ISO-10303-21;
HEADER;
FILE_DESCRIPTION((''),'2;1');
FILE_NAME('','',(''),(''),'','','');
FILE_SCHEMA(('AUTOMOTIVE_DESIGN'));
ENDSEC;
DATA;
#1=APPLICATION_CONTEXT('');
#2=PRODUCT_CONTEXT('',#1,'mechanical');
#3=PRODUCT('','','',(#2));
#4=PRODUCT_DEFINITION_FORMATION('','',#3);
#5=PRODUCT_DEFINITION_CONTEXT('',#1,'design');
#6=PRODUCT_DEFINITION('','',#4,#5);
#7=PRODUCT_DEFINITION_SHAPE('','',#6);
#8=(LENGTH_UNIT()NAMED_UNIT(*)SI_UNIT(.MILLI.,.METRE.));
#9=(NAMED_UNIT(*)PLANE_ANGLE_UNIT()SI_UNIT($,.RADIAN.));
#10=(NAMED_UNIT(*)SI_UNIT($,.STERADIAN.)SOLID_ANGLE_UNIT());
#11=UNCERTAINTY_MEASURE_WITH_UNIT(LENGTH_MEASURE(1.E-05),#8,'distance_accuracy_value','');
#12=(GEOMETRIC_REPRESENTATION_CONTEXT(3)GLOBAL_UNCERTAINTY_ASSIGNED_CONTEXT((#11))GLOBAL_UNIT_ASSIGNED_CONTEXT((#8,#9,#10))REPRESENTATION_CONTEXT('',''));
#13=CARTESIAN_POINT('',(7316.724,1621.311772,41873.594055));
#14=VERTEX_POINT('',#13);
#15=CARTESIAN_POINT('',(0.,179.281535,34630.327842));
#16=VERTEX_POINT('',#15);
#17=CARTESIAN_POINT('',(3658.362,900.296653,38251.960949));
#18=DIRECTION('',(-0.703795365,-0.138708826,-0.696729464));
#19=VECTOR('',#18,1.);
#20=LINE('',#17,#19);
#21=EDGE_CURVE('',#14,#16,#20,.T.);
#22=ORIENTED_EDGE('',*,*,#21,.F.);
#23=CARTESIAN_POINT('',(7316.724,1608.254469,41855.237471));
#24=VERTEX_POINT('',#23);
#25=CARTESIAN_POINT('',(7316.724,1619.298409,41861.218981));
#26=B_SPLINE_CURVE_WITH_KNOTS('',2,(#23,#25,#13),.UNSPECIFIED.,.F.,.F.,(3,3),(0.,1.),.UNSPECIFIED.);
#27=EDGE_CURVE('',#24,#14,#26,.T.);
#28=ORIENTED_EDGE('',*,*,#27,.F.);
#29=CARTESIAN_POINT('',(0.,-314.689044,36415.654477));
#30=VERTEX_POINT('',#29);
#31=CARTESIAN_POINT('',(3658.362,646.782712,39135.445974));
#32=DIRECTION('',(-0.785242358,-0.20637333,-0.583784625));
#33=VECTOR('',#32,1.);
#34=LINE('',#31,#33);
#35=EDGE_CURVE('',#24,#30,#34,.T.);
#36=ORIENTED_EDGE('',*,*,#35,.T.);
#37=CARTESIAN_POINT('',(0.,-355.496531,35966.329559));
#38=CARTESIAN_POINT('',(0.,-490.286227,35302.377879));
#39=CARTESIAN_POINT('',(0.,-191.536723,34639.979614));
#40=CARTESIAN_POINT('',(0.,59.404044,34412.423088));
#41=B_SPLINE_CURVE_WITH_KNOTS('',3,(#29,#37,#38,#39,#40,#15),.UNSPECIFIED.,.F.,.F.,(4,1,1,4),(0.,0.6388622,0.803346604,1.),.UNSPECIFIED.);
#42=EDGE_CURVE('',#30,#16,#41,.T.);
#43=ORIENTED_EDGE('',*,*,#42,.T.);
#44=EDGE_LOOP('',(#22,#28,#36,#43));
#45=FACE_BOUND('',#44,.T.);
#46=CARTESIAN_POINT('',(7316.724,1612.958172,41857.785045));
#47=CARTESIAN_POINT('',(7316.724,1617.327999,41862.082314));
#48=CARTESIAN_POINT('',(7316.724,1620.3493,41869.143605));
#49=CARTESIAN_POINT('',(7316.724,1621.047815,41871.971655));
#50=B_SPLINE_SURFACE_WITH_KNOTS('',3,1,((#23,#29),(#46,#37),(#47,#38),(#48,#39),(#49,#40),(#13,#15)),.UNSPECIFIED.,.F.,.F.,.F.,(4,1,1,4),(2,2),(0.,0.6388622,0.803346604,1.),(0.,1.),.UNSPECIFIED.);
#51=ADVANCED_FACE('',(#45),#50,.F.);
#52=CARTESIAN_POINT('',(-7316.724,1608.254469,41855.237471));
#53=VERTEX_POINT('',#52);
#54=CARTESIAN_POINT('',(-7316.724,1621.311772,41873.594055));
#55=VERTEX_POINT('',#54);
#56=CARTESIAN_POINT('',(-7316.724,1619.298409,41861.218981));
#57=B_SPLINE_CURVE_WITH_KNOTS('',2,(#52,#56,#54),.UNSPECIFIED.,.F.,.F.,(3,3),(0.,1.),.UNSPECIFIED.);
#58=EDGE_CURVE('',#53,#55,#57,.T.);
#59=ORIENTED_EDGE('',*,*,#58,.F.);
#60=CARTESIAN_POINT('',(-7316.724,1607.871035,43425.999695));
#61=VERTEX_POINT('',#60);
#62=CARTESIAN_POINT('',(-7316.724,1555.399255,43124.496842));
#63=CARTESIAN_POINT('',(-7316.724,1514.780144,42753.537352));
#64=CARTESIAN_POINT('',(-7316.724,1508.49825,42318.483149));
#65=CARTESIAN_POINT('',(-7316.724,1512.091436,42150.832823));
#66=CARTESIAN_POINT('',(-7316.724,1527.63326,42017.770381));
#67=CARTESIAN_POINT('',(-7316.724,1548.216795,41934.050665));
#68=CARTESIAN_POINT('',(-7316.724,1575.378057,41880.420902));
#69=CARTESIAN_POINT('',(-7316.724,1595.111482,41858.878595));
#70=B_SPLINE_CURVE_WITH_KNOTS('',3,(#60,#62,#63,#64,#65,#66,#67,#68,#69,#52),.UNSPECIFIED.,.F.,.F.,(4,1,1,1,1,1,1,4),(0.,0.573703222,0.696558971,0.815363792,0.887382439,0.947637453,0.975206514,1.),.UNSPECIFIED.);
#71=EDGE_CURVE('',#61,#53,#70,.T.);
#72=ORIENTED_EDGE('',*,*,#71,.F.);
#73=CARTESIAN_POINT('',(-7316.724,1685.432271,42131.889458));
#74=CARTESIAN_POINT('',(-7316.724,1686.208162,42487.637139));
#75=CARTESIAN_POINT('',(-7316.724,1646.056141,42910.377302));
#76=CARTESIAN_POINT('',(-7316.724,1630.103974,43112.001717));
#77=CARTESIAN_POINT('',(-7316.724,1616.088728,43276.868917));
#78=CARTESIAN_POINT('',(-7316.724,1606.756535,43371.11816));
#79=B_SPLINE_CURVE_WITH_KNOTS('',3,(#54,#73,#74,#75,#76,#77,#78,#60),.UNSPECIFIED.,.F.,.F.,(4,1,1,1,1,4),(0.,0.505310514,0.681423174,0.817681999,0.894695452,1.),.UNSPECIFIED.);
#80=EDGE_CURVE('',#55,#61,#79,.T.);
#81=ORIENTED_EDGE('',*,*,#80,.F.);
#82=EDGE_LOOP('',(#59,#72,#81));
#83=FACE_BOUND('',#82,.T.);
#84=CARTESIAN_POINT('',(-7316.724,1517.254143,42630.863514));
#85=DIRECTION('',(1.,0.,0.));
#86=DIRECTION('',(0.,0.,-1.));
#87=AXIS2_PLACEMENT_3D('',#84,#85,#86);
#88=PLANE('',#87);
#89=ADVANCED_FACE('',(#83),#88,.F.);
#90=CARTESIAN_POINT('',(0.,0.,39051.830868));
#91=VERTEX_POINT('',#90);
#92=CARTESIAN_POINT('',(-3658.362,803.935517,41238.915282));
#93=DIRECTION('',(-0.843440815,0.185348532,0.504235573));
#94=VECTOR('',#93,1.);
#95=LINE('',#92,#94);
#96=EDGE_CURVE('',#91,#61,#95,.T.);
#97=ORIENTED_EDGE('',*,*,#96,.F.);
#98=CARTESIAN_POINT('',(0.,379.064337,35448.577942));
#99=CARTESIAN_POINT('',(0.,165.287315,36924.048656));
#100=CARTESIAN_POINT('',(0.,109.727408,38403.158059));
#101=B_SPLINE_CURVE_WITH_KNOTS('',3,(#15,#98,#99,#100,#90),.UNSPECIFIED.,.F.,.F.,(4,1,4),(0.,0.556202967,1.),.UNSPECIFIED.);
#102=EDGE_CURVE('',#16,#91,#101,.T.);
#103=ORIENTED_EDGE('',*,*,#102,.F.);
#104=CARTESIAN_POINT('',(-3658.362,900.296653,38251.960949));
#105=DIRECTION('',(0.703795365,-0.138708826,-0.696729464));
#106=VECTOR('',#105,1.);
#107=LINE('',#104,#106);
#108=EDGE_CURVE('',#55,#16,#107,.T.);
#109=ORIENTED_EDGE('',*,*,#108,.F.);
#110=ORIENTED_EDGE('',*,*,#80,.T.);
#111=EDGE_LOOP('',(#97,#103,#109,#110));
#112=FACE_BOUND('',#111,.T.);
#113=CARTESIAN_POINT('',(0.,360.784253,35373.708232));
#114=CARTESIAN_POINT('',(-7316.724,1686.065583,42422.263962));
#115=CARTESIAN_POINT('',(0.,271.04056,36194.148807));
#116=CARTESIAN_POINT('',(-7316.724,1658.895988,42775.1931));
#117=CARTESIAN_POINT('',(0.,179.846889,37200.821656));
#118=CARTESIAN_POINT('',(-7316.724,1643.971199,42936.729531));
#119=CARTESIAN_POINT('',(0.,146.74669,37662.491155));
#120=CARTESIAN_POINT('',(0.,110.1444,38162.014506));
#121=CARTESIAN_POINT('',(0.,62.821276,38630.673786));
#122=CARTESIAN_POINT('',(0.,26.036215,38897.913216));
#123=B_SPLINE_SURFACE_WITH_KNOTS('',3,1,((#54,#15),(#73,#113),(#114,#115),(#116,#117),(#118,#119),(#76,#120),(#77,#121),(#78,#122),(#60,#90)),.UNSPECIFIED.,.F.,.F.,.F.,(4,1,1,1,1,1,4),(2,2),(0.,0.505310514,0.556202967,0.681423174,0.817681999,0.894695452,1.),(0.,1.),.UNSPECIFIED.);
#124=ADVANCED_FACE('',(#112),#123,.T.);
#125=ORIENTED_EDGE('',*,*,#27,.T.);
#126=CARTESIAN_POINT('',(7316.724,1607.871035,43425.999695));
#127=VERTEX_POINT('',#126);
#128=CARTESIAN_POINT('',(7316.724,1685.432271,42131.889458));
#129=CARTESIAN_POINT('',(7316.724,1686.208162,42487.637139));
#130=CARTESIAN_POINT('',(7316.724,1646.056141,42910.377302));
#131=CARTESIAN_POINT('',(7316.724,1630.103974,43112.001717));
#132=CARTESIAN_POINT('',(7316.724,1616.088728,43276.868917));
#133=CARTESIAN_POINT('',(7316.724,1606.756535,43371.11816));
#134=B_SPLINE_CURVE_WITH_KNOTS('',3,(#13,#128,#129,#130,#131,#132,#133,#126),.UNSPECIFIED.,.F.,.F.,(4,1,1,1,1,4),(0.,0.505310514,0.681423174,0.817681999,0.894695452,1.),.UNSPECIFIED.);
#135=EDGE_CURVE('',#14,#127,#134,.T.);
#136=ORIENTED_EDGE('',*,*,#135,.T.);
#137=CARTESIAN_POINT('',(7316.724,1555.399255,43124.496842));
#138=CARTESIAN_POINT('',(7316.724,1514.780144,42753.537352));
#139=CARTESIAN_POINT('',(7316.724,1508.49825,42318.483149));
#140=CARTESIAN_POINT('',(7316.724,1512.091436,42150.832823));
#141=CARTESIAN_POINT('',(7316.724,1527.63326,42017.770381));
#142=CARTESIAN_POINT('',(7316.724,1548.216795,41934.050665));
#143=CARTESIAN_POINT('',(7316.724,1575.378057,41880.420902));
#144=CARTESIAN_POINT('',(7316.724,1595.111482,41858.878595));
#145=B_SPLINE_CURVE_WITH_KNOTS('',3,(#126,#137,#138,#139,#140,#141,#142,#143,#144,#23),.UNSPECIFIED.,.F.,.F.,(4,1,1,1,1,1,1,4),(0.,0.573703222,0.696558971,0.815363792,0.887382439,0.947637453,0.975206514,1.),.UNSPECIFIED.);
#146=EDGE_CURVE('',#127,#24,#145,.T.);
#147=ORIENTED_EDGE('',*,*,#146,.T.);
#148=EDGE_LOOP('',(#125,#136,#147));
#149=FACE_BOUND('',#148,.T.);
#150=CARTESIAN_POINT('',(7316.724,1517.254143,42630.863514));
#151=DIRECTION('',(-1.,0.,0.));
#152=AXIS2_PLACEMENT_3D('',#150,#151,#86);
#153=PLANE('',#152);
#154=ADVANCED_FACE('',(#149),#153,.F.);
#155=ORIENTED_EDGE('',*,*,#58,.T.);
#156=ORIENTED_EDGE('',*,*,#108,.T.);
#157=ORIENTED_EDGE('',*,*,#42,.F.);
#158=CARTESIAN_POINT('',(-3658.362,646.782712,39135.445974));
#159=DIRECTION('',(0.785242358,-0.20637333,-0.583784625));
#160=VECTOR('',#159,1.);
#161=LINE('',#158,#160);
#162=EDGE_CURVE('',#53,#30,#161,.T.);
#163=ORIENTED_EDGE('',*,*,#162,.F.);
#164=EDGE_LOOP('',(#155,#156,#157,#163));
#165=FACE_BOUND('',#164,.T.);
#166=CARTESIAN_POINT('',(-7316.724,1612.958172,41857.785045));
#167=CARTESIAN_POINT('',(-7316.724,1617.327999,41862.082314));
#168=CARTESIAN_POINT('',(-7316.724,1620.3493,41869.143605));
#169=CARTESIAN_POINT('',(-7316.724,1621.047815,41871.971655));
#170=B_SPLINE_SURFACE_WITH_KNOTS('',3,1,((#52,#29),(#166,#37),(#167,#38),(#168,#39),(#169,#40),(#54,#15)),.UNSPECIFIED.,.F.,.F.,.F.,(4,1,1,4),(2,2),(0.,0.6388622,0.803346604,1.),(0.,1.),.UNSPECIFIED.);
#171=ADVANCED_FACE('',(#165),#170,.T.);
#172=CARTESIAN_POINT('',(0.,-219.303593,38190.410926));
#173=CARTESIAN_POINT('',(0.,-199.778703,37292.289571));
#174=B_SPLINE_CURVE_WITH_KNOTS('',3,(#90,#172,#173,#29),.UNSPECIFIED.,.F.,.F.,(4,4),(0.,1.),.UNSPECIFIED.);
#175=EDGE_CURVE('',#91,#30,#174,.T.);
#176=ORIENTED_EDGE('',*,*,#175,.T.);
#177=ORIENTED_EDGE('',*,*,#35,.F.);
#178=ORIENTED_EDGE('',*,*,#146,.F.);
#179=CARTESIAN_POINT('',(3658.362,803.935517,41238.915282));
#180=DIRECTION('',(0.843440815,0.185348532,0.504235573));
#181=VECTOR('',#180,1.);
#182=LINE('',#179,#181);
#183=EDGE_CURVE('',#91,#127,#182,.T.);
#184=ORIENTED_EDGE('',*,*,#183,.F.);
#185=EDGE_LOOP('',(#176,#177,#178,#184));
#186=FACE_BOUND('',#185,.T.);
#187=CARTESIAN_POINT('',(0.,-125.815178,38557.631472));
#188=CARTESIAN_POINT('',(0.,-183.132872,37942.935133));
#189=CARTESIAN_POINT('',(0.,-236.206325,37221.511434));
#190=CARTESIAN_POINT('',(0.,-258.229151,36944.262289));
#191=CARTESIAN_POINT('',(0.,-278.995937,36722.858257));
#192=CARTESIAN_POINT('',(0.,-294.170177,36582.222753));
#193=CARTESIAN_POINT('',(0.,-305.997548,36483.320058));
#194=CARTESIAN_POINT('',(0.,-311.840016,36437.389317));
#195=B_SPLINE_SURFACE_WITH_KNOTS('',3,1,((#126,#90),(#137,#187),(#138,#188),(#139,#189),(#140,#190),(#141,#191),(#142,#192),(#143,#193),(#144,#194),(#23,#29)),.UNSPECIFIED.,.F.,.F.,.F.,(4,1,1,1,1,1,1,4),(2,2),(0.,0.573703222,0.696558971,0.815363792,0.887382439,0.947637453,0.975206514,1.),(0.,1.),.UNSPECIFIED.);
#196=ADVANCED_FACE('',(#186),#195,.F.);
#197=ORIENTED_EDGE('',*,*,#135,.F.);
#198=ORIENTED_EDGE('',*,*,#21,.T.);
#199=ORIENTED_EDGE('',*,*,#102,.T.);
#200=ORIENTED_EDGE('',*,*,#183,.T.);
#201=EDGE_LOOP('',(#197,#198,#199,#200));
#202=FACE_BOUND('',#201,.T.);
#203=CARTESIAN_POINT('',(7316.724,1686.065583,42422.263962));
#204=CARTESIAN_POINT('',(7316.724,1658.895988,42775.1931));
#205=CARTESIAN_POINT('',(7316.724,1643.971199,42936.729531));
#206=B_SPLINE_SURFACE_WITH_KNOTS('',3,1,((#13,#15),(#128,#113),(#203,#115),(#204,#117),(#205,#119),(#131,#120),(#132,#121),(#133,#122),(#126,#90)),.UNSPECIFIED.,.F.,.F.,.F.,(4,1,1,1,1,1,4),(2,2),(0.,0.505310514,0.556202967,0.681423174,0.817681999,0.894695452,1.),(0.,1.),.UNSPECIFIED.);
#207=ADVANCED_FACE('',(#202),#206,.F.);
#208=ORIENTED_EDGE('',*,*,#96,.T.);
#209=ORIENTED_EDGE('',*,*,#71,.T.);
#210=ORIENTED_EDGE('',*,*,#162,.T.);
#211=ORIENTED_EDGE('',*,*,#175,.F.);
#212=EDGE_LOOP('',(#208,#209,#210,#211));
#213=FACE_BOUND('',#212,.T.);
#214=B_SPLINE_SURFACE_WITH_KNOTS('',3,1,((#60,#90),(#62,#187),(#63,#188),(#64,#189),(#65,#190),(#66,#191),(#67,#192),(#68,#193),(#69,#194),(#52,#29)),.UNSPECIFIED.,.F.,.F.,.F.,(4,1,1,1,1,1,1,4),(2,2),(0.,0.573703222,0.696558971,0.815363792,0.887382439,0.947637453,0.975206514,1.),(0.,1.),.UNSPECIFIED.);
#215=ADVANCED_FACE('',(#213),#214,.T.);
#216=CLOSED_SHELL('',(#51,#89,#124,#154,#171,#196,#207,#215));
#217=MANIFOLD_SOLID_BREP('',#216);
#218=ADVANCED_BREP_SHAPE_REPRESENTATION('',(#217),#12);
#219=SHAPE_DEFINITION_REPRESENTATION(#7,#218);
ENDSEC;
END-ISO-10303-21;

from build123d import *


with BuildPart() as part:
    # Loft1: read off the stored shape, not the designer's step
    # Loft1: loft between two sections, ruled curve by curve
    loft1_from = [
        Edge.make_bspline([(-7316.724, 1607.871034902, 43425.999695248), (-7316.724, 1555.399254926, 43124.496841722), (-7316.724, 1514.780143996, 42753.537351778), (-7316.724, 1508.498249535, 42318.483149407), (-7316.724, 1512.091435732, 42150.832822783), (-7316.724, 1527.633260124, 42017.770380841), (-7316.724, 1548.216794735, 41934.050665066), (-7316.724, 1575.378056511, 41880.420902411), (-7316.724, 1595.111481928, 41858.878595306), (-7316.724, 1608.254468516, 41855.237470627)], [0, 0, 0, 0, 0.573703222, 0.696558971, 0.815363792, 0.887382439, 0.947637453, 0.975206514, 1, 1, 1, 1], 3),
        Edge.make_bspline([(-7316.724, 1608.254468516, 41855.237470627), (-7316.724, 1612.958172417, 41857.785044707), (-7316.724, 1617.327999242, 41862.082313709), (-7316.724, 1620.34930002, 41869.143605319), (-7316.724, 1621.04781511, 41871.971655237), (-7316.724, 1621.311771552, 41873.594055468)], [0, 0, 0, 0, 0.6388622, 0.803346604, 1, 1, 1, 1], 3),
        Edge.make_bspline([(-7316.724, 1621.311771552, 41873.594055468), (-7316.724, 1685.432271103, 42131.889458428), (-7316.724, 1686.065582535, 42422.263961524), (-7316.724, 1658.895987694, 42775.193099689), (-7316.724, 1643.971199003, 42936.729530544), (-7316.724, 1630.103974345, 43112.001716618), (-7316.724, 1616.088727587, 43276.868916799), (-7316.724, 1606.756535317, 43371.118160346), (-7316.724, 1607.871034902, 43425.999695248)], [0, 0, 0, 0, 0.505310514, 0.556202967, 0.681423174, 0.817681999, 0.894695452, 1, 1, 1, 1], 3),
    ]
    loft1_to = [
        Edge.make_bspline([(0, 0, 39051.830867838), (0, -125.815178037, 38557.63147169), (0, -183.132872432, 37942.935132973), (0, -236.206325416, 37221.511433591), (0, -258.229151171, 36944.262288796), (0, -278.995937285, 36722.858257419), (0, -294.170177112, 36582.222753078), (0, -305.997548202, 36483.320057932), (0, -311.840015755, 36437.389317032), (0, -314.689043667, 36415.654477111)], [0, 0, 0, 0, 0.573703222, 0.696558971, 0.815363792, 0.887382439, 0.947637453, 0.975206514, 1, 1, 1, 1], 3),
        Edge.make_bspline([(0, -314.689043667, 36415.654477111), (0, -355.496530662, 35966.329559362), (0, -490.286226797, 35302.377879459), (0, -191.536723392, 34639.979613651), (0, 59.404043635, 34412.423088272), (0, 179.28153527, 34630.327842035)], [0, 0, 0, 0, 0.6388622, 0.803346604, 1, 1, 1, 1], 3),
        Edge.make_bspline([(0, 179.28153527, 34630.327842035), (0, 360.784253311, 35373.708232123), (0, 271.040560055, 36194.148807213), (0, 179.846888845, 37200.821655985), (0, 146.746690143, 37662.491155011), (0, 110.144400162, 38162.01450621), (0, 62.821276041, 38630.673785586), (0, 26.036215336, 38897.913216121), (0, 0, 39051.830867838)], [0, 0, 0, 0, 0.505310514, 0.556202967, 0.681423174, 0.817681999, 0.894695452, 1, 1, 1, 1], 3),
    ]
    loft1 = Solid(Shell([*[Face.make_surface_from_curves(loft1_from[k], loft1_to[k]) for k in range(3)], Face(Wire(loft1_from)), Face(Wire(loft1_to))]))
    add(loft1)

    # Mirror1: part across plane


with BuildPart() as part_1:
    add(part.part)
    add(part.part.mirror(Plane(origin=(0, 0, 0), x_dir=(0, 0, 1), z_dir=(1, 0, 0))))


solid = part_1.part
